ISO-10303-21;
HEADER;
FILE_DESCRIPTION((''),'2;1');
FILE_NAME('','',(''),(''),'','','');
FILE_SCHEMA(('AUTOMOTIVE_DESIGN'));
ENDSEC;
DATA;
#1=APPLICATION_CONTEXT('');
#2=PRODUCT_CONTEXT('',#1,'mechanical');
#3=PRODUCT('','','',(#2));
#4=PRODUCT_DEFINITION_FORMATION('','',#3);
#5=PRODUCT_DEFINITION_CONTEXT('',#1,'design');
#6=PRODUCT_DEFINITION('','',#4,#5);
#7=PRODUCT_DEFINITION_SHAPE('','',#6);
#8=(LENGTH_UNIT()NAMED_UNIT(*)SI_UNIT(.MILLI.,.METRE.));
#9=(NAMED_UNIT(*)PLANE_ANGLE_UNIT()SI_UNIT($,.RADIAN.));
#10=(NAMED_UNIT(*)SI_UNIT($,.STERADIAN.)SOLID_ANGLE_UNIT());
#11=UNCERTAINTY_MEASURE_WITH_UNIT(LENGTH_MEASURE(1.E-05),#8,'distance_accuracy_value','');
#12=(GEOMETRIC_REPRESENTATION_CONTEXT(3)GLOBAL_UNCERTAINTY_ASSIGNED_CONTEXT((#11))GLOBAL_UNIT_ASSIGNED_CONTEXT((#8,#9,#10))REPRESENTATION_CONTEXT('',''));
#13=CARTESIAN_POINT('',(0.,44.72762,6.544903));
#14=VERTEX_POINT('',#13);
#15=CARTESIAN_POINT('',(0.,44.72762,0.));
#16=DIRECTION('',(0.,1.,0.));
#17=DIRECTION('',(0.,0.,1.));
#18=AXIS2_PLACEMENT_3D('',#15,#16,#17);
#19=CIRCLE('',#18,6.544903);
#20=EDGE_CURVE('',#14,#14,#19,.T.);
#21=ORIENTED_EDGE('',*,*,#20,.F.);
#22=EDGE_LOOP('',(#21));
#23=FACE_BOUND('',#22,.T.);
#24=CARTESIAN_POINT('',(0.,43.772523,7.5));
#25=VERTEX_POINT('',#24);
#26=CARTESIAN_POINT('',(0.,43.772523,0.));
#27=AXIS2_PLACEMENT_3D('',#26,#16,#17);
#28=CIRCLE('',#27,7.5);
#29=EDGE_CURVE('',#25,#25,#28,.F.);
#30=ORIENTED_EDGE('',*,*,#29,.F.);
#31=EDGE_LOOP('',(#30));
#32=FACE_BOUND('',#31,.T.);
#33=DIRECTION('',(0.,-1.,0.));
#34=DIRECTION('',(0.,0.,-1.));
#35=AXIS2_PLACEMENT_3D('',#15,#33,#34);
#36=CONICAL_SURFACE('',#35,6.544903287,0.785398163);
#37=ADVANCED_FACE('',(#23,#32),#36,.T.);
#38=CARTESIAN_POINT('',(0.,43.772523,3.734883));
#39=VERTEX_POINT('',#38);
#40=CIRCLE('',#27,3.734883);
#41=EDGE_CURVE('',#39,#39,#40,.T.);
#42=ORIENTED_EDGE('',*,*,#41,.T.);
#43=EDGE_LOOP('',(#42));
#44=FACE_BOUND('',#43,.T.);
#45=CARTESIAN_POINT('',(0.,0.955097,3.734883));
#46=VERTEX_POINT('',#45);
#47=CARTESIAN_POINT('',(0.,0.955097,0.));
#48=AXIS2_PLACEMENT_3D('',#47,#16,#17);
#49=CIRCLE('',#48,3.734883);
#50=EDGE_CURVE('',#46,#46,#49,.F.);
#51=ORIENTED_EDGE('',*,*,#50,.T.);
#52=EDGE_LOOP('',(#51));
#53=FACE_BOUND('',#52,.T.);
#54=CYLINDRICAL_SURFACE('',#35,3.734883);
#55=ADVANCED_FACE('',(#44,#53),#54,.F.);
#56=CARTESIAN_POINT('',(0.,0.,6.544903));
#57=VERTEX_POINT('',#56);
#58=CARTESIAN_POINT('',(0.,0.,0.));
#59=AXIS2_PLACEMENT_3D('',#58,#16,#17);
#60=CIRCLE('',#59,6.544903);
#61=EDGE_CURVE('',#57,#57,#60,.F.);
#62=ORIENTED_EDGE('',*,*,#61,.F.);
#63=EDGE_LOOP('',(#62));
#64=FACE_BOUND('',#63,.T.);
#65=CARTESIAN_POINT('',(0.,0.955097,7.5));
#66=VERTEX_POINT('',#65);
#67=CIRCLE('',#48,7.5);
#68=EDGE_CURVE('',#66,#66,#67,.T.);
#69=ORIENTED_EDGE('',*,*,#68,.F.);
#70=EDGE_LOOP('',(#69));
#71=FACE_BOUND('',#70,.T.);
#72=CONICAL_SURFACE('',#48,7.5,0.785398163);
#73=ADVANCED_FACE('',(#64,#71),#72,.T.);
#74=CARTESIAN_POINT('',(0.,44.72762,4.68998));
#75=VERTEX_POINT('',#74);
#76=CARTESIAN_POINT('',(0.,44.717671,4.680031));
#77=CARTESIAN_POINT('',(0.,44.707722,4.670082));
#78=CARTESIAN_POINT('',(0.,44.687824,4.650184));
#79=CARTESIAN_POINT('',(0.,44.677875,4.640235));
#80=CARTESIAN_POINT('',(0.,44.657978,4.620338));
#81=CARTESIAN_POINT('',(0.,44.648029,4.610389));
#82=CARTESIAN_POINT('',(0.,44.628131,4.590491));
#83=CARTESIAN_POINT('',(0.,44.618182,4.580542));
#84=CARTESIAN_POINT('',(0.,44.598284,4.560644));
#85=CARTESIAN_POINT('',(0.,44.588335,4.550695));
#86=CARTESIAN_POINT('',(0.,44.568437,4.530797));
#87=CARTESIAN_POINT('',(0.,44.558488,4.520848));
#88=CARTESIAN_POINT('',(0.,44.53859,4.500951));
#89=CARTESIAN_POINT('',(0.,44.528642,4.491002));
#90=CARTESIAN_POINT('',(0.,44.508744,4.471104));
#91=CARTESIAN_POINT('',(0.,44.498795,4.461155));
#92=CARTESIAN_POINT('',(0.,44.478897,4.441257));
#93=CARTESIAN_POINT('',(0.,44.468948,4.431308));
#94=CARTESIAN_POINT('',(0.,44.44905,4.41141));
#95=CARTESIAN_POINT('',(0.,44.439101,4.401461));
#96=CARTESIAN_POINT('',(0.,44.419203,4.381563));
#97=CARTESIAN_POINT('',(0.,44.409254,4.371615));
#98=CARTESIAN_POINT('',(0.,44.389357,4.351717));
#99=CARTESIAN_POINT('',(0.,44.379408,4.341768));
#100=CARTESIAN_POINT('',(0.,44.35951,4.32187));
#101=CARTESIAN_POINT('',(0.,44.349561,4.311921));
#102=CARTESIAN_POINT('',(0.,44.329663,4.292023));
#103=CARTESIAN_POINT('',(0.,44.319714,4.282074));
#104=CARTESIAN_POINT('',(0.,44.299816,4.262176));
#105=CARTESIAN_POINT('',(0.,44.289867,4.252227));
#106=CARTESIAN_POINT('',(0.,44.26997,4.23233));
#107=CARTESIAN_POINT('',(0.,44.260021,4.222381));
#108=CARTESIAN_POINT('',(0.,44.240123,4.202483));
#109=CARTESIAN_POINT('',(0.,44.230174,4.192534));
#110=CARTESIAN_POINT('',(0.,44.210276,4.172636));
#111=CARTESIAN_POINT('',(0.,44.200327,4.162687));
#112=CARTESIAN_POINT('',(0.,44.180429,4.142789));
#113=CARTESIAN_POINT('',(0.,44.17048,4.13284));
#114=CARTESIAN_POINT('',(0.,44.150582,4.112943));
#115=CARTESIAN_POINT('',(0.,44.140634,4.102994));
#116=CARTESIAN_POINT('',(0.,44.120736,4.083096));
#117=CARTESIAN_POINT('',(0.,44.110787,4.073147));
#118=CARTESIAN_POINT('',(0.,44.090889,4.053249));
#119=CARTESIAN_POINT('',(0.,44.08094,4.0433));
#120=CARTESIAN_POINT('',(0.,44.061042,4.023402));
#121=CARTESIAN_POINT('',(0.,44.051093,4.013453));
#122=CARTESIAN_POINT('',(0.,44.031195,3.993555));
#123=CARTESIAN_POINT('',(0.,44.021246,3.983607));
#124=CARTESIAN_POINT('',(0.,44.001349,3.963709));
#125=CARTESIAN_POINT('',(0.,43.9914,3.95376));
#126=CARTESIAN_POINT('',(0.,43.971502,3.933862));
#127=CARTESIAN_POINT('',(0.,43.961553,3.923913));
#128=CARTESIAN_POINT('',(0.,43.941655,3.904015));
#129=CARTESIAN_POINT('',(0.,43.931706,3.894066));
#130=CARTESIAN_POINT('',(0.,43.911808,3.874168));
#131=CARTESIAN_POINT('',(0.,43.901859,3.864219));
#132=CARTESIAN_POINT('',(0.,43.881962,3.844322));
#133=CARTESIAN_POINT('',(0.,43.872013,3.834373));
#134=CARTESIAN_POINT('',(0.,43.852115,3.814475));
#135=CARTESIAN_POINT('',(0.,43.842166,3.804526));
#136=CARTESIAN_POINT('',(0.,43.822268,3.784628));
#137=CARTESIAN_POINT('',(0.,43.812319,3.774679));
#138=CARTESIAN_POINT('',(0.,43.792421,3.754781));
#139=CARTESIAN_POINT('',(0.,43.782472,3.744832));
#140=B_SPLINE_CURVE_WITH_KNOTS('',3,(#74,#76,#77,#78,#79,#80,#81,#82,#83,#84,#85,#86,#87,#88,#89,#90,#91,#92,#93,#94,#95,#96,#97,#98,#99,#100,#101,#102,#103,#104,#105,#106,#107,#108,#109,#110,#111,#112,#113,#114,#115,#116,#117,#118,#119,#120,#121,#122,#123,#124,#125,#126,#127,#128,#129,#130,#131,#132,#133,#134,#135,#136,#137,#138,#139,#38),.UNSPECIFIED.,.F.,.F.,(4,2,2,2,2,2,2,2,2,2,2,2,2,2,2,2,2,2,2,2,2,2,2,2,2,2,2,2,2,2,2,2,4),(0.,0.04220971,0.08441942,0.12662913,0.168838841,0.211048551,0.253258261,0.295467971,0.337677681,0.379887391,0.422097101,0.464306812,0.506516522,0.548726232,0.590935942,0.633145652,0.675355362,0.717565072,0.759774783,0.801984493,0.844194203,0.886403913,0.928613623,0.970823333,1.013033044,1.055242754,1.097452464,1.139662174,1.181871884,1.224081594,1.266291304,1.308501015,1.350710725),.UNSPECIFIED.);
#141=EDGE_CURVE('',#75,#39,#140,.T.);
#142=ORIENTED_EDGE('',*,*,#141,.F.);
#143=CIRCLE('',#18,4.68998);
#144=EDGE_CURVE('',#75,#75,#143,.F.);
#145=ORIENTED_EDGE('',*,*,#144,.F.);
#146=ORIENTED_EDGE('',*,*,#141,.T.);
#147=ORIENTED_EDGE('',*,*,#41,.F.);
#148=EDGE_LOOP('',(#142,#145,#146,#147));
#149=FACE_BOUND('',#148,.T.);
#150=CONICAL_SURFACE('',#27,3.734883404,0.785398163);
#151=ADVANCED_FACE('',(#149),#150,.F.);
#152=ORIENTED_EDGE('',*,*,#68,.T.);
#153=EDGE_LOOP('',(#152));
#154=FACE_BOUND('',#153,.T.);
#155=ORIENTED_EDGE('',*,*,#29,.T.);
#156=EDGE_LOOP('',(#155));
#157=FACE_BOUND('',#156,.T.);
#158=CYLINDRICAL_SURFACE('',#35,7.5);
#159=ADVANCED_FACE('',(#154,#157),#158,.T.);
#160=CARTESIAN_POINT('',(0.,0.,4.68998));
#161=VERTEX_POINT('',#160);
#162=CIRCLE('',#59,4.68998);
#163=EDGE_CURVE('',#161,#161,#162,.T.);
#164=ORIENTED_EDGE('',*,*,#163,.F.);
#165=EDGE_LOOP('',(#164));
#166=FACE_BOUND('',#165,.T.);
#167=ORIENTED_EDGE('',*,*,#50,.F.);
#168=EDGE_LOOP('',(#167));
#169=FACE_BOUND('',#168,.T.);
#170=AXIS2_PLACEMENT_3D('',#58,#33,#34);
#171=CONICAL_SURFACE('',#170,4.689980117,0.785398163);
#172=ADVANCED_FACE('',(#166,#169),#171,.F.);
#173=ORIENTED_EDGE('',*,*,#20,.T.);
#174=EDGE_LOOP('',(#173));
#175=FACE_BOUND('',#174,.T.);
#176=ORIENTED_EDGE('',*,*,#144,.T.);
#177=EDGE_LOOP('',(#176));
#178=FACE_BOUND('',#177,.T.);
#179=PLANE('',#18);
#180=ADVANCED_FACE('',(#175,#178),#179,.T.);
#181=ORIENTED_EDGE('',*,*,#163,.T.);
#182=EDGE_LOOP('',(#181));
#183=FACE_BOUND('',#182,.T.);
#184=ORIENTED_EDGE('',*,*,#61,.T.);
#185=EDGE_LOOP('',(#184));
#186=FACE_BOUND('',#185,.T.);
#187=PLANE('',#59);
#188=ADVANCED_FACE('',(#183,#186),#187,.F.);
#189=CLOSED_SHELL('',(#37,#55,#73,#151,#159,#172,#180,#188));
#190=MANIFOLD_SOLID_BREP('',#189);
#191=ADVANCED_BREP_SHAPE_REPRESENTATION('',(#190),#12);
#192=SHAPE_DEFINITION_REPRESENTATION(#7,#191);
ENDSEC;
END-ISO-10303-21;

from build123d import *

# Parameters (mm, degrees)
SKETCH1_R           = 7.5
BOSS_EXTRUDE1_DEPTH = 44.727620055
SKETCH2_R           = 3.734883404
CUT_EXTRUDE1_DEPTH  = 46.968032324
CHAMFER1_SIZE       = 0.955096713


with BuildPart() as part:
    # Sketch1 → Boss-Extrude1 (new body)
    with BuildSketch(Plane(origin=(0, 0, 0), x_dir=(1, 0, 0), z_dir=(0, 1, 0))):
        Circle(SKETCH1_R)
    extrude(amount=BOSS_EXTRUDE1_DEPTH)

    # Sketch2 → Cut-Extrude1 (cut, through all)
    with BuildSketch(Plane(origin=(0, 0, 0), x_dir=(1, 0, 0), z_dir=(0, 1, 0))):
        Circle(SKETCH2_R)
    extrude(amount=CUT_EXTRUDE1_DEPTH, mode=Mode.SUBTRACT)

    # Chamfer1
    chamfer1_edges = [part.edges().sort_by_distance(p)[0] for p in [
        (-3.734883404, 44.727620055, 0),
        (-3.734883404, 0, 0),
        (-7.5, 0, 0),
        (-7.5, 44.727620055, 0),
    ]]
    chamfer(chamfer1_edges, length=CHAMFER1_SIZE)


solid = part.part
